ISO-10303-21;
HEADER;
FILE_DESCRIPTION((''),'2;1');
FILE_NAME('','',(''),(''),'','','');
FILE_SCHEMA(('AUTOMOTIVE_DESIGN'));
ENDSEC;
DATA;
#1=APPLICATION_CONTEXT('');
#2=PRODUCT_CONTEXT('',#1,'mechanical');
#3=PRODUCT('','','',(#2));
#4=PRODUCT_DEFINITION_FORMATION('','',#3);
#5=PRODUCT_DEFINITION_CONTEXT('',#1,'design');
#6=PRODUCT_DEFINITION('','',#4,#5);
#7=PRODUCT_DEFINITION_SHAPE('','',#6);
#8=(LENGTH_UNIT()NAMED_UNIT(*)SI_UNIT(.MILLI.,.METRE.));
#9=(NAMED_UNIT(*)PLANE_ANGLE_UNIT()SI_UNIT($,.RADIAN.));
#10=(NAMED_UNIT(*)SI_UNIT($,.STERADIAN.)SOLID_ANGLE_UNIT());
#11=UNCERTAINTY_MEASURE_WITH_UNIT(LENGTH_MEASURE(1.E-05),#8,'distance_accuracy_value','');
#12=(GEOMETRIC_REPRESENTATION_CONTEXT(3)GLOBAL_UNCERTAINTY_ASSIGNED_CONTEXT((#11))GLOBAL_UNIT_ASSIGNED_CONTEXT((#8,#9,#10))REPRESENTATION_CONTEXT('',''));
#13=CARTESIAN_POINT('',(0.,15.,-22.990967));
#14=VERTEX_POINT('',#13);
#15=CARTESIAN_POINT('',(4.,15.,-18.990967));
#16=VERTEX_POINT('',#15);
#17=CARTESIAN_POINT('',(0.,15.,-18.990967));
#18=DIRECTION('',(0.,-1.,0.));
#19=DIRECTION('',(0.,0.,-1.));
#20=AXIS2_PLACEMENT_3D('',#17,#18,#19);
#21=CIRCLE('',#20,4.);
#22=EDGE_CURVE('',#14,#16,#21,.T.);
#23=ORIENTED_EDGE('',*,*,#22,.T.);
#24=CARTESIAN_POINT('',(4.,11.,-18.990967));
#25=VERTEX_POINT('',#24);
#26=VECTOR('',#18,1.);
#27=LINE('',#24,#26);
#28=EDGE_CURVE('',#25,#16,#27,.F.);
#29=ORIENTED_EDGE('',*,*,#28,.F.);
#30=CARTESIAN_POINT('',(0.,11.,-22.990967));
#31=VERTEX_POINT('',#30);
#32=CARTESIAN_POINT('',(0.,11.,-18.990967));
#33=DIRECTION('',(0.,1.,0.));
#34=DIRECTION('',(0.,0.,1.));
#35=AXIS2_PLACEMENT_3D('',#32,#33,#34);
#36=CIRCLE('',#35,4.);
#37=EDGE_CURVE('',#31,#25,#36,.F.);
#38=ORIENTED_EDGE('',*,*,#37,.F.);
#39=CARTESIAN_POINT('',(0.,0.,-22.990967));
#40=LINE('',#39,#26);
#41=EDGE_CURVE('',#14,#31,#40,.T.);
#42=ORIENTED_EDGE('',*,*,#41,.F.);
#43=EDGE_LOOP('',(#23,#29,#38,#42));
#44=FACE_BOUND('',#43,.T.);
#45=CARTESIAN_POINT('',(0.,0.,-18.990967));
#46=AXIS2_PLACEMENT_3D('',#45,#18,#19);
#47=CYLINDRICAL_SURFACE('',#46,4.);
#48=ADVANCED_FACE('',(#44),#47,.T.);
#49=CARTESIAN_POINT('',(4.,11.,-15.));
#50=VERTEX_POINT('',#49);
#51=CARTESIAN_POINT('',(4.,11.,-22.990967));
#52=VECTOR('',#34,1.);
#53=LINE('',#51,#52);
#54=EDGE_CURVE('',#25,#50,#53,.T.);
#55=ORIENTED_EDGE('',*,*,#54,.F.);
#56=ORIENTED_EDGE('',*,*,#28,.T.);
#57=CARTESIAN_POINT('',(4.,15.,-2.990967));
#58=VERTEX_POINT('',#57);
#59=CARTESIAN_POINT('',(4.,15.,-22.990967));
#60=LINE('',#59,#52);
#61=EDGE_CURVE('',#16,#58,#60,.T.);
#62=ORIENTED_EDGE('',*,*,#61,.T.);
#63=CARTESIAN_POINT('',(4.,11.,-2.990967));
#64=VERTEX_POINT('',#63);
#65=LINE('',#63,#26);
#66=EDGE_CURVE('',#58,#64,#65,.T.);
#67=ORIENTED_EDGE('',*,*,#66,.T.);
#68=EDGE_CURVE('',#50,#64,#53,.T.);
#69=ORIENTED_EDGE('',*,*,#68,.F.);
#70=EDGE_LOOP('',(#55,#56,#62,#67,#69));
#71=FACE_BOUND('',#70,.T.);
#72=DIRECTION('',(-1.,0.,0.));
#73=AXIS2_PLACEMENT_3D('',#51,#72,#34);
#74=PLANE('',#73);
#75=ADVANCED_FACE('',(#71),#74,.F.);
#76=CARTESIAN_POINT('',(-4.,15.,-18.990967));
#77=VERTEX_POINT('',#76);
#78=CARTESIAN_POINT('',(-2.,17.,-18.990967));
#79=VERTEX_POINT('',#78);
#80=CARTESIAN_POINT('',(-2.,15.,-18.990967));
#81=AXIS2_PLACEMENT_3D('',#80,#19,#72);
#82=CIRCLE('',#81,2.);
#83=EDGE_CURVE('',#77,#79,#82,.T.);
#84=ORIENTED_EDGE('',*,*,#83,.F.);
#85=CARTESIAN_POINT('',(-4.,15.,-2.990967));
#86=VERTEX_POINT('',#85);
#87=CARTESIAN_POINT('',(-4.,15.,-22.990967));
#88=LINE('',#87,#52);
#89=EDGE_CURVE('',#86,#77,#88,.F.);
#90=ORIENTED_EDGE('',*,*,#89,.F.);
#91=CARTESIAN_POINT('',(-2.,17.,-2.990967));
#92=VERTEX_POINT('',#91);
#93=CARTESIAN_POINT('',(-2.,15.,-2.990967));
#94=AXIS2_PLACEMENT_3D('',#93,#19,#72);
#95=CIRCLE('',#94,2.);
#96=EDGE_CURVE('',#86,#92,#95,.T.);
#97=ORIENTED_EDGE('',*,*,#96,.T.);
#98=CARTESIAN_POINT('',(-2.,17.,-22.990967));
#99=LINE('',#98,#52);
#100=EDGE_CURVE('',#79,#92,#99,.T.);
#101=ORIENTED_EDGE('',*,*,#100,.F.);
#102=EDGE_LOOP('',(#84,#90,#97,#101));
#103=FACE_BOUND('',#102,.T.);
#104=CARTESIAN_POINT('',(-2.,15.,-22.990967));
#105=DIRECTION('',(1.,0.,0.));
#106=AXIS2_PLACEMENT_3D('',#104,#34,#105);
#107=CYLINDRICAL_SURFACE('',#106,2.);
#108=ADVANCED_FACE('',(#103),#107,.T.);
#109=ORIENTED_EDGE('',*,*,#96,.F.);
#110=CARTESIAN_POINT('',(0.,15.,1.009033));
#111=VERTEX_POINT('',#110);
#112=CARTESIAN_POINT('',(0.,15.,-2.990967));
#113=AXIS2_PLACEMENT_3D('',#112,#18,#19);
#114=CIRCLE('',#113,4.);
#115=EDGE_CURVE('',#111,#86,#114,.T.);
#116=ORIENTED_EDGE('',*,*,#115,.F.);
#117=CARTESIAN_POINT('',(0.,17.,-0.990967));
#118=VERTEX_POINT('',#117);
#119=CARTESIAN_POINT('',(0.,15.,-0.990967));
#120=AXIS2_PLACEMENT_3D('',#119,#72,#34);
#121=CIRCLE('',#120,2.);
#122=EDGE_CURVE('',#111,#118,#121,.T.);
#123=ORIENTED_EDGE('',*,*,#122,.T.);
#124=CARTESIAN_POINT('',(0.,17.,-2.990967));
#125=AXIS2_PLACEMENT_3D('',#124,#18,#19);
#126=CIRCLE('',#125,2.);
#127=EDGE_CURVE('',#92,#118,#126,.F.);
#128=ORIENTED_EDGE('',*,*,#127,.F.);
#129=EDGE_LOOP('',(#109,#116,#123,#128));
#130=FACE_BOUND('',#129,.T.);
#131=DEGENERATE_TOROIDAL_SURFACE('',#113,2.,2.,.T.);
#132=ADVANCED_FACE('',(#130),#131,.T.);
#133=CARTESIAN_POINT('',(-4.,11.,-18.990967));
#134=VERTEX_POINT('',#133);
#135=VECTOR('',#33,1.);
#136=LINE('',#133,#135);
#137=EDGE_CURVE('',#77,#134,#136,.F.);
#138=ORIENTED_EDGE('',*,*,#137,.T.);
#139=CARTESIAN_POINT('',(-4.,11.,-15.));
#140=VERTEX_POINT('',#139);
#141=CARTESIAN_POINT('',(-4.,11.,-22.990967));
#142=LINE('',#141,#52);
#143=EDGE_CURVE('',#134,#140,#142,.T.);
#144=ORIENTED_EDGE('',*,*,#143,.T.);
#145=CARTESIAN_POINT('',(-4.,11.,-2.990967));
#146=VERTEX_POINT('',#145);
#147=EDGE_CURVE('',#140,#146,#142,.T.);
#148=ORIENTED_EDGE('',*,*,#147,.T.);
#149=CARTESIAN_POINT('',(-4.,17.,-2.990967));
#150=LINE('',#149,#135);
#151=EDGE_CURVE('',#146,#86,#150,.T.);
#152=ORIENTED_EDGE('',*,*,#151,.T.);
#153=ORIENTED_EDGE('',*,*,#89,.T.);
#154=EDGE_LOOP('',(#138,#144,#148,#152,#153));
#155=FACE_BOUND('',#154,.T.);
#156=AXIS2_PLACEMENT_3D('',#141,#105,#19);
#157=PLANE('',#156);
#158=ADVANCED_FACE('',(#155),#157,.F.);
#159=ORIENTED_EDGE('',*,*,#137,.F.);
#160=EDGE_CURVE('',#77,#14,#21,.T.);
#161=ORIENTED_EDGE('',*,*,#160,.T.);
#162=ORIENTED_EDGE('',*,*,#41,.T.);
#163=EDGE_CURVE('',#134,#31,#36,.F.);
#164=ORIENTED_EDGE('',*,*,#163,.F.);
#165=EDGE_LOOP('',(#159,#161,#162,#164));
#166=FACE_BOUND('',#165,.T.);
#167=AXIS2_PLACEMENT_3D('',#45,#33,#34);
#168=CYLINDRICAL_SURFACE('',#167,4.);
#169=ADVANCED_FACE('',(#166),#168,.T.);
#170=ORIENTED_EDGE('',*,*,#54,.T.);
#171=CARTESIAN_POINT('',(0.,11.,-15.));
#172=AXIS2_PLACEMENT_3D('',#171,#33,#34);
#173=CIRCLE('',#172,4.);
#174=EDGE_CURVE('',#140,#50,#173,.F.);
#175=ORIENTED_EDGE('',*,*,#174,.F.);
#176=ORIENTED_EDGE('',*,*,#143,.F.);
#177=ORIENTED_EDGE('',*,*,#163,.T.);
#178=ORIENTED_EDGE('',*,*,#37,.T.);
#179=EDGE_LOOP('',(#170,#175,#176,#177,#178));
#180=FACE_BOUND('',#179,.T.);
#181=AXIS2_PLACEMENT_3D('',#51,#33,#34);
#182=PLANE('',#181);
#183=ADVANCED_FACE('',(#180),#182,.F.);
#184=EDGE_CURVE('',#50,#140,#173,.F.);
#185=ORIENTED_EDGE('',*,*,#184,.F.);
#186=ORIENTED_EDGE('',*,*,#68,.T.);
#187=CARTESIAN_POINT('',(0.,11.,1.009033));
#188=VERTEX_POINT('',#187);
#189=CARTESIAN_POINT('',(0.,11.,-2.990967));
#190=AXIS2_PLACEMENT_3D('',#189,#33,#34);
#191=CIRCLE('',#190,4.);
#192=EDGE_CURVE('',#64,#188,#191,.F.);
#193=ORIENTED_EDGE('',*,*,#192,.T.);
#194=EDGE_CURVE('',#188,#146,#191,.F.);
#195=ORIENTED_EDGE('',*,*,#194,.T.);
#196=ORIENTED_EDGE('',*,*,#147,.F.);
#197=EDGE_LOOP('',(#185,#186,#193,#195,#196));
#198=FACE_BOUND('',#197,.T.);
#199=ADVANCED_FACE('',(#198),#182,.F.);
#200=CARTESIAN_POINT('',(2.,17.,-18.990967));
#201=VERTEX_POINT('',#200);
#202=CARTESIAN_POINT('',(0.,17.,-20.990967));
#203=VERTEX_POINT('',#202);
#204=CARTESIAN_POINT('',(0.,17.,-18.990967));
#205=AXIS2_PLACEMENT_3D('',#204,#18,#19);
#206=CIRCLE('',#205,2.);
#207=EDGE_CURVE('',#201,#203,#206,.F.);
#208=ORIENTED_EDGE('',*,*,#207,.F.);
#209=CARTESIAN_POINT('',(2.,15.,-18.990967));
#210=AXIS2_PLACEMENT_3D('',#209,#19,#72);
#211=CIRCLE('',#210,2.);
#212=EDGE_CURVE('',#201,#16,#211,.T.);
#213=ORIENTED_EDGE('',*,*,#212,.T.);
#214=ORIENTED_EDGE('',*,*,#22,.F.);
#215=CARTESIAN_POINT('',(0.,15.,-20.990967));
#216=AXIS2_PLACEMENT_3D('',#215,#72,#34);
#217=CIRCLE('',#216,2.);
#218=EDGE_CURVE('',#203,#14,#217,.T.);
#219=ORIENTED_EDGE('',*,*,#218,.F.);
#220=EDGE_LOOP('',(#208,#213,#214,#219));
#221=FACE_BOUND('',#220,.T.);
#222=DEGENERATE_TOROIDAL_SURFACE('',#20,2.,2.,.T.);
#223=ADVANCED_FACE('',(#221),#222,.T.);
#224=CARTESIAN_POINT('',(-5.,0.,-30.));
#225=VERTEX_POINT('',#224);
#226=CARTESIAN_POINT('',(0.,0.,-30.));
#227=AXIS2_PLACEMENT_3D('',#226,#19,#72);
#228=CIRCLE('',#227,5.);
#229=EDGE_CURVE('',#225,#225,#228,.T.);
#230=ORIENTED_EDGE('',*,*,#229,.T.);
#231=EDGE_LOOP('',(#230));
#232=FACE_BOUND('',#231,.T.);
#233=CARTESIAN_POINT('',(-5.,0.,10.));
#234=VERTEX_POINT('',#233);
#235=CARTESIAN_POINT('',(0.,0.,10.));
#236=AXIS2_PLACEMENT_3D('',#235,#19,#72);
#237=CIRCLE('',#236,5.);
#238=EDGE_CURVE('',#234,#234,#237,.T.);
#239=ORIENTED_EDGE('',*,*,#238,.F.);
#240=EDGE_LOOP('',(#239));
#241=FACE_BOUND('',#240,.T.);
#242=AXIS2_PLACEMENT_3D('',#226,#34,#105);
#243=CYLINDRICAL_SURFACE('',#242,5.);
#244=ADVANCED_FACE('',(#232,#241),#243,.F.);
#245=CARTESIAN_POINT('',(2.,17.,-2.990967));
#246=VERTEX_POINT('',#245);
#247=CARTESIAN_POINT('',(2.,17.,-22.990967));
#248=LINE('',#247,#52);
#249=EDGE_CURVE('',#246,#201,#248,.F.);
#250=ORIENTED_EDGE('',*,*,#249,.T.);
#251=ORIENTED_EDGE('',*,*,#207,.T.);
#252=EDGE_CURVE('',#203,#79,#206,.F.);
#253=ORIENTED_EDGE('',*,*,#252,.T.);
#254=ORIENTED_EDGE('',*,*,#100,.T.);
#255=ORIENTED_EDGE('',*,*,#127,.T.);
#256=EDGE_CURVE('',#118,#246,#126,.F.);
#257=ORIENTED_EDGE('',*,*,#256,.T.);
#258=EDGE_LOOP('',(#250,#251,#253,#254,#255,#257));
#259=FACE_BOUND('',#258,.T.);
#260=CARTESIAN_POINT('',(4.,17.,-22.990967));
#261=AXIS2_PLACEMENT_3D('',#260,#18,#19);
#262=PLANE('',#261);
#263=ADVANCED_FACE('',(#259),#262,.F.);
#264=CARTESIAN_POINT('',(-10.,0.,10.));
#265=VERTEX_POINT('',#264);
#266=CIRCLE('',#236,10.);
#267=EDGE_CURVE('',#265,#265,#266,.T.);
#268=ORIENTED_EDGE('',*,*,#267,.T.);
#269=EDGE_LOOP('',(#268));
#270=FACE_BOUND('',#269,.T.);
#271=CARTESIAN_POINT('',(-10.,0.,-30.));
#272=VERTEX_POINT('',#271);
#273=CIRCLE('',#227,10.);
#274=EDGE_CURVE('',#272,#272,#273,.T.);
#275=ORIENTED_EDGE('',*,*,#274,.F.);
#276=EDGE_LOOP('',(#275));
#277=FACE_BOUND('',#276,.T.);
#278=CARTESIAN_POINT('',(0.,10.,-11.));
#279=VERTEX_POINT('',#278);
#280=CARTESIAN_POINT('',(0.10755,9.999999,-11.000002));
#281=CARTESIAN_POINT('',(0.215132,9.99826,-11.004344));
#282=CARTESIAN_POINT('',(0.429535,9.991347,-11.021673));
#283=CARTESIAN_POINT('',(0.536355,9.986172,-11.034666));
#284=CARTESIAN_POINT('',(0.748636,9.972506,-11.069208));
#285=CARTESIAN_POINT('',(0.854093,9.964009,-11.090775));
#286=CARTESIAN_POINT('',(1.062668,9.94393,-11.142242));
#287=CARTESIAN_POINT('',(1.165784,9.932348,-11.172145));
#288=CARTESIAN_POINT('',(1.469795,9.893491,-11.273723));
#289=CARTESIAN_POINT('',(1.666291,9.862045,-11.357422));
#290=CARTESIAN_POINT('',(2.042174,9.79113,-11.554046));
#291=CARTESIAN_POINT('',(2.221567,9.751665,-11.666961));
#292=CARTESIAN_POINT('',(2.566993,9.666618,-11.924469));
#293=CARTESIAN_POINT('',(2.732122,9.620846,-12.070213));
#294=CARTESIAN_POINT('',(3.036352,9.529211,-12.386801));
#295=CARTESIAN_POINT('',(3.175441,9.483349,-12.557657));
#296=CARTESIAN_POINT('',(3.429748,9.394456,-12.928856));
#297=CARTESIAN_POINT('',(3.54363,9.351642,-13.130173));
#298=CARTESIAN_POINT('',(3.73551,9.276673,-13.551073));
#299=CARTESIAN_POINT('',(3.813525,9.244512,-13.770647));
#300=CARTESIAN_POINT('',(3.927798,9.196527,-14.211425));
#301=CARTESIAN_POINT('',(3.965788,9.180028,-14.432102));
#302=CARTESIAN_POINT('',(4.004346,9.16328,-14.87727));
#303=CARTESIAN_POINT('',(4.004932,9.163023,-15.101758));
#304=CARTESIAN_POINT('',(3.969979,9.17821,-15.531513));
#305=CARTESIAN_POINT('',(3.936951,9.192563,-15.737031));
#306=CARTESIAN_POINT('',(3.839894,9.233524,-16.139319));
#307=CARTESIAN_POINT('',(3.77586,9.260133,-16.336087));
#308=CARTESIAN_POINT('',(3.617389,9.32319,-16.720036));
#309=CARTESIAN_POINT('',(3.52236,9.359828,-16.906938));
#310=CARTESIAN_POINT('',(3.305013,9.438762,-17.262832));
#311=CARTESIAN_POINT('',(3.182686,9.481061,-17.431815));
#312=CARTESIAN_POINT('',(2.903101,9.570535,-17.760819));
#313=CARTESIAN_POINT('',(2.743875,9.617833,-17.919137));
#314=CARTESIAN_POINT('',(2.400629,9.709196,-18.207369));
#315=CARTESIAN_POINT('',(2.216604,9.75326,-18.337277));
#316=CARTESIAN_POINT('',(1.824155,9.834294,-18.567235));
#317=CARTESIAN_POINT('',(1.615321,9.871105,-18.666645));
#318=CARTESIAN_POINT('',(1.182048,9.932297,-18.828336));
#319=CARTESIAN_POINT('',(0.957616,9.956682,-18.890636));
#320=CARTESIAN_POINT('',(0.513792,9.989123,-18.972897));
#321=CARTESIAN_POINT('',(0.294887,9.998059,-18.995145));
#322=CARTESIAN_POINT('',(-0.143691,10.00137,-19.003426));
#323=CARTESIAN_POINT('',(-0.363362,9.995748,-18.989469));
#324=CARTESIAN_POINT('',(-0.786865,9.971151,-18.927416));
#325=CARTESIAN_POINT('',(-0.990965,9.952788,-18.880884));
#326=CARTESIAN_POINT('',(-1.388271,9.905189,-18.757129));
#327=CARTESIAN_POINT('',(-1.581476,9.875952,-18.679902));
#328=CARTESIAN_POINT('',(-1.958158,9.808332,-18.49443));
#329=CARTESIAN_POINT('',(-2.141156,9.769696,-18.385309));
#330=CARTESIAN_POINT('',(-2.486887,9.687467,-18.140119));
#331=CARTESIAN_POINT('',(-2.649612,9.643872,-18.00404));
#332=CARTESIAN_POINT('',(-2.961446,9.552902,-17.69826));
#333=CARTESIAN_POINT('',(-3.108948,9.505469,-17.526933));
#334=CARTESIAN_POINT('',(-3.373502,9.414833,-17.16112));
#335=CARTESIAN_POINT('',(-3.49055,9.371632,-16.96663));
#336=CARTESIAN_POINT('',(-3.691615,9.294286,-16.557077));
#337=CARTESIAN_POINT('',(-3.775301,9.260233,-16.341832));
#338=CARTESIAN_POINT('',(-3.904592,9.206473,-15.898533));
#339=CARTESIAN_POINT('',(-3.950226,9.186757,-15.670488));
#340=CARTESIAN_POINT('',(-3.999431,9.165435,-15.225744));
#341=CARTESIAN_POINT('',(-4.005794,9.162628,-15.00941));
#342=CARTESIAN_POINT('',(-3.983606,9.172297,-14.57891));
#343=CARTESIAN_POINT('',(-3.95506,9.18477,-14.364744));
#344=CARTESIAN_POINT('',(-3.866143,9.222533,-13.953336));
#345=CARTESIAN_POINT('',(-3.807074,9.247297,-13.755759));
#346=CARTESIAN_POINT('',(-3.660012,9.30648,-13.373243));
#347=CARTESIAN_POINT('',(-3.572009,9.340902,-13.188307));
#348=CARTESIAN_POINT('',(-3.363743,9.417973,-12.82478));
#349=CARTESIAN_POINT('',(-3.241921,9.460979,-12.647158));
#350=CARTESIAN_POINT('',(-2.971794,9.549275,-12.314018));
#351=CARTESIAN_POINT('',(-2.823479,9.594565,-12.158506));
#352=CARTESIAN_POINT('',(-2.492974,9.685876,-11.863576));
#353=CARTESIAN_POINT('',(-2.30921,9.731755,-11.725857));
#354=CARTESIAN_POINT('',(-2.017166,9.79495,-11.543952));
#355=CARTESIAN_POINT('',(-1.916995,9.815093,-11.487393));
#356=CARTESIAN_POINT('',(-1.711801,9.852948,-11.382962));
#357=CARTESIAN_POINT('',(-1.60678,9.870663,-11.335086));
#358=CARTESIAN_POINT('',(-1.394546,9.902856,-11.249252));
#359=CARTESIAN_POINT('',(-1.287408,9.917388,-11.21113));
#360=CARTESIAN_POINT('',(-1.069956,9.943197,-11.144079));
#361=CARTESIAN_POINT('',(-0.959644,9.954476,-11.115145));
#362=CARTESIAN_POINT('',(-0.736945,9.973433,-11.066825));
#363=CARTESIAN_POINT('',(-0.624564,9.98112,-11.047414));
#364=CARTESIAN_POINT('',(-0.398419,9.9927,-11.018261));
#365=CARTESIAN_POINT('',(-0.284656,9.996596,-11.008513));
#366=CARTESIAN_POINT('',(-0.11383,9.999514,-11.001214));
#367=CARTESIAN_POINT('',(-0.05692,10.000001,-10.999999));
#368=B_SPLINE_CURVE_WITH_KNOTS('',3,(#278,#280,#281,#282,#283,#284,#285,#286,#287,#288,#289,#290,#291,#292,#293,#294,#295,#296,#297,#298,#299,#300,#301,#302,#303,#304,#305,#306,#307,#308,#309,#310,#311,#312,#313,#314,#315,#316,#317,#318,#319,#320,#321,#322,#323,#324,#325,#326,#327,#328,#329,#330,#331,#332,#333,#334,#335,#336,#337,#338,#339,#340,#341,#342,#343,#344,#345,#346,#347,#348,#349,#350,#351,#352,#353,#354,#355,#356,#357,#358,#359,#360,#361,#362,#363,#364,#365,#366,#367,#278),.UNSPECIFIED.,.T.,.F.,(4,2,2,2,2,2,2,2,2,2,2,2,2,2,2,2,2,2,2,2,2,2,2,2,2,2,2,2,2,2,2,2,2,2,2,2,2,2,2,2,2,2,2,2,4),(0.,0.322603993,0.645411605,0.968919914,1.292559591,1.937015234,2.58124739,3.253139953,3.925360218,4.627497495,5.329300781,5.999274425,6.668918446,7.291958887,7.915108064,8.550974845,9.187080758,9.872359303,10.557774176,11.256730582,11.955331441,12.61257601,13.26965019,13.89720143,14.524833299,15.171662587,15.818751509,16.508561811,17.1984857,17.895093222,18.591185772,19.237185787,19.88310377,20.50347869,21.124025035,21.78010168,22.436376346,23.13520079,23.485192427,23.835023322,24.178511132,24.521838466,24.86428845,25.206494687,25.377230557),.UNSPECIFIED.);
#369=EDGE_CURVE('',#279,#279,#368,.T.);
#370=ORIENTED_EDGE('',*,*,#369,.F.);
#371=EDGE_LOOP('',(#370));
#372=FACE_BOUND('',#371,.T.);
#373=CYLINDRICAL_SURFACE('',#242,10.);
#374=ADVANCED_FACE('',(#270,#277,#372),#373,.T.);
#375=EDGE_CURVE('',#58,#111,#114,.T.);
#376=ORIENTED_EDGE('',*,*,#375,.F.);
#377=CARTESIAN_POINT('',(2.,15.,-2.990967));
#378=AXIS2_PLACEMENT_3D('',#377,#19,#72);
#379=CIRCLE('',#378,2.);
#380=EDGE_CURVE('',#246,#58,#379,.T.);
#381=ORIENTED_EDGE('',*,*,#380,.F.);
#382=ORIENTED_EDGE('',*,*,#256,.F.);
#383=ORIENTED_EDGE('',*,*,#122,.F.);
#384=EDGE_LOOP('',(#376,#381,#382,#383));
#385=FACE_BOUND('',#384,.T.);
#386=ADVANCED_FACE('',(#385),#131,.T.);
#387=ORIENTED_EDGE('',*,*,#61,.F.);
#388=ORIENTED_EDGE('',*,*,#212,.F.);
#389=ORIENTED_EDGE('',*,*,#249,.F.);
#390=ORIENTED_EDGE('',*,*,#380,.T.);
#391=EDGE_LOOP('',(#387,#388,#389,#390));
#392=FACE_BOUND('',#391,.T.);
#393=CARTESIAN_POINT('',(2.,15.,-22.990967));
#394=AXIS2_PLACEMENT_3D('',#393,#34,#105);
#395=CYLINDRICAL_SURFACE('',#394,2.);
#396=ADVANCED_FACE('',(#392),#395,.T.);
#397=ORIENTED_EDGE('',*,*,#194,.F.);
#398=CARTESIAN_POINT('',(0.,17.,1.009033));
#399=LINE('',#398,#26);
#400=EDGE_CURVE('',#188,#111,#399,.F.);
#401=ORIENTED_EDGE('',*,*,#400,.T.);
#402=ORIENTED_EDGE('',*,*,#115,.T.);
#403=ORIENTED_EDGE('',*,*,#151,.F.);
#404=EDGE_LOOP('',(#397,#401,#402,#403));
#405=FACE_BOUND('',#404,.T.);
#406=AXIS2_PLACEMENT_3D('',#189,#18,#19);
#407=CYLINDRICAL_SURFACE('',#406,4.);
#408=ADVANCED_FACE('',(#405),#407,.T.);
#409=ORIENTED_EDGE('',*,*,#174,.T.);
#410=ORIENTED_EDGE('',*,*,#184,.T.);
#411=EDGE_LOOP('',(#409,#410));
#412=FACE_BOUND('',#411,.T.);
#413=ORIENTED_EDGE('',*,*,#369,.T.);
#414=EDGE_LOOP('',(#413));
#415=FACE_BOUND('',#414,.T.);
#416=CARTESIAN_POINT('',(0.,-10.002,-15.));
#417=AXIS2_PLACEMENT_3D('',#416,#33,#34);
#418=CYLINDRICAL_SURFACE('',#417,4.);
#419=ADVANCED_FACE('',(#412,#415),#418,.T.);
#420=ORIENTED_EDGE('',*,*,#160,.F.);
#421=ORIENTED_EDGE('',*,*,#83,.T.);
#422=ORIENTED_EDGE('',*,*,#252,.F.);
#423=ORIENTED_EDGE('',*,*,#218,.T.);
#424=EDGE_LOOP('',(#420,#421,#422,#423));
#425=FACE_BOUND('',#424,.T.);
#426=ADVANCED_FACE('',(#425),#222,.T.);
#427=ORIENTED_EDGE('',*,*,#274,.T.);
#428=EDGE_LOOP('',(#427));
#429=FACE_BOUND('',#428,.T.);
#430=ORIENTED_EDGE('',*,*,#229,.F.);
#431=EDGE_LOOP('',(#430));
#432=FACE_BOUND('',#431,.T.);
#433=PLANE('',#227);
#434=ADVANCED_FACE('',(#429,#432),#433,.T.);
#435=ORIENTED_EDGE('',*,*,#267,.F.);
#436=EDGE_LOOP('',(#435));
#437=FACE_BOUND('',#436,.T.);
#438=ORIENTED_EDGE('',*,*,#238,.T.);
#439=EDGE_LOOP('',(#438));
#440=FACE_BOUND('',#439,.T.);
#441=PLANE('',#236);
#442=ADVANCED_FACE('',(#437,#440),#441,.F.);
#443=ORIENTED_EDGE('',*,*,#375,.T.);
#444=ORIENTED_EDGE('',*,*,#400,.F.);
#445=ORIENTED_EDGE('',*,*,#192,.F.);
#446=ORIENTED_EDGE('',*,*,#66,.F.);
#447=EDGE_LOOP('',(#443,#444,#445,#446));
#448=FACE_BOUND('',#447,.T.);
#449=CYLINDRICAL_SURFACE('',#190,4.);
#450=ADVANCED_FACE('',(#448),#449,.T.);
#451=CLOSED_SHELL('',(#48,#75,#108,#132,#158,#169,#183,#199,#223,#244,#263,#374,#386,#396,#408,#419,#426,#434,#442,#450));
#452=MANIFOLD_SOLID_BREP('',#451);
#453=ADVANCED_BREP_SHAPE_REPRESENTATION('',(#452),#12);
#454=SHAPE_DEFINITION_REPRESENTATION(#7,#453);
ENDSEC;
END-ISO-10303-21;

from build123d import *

# Parameters (mm, degrees)
EXTRUDE_THIN6_START      = -10
SKETCH10_R               = 10
SKETCH10_R_2             = 5
EXTRUDE_THIN6_DEPTH      = 40
BOSS_EXTRUDE3_REACH      = 42.311
BOSS_EXTRUDE3_END_RADIUS = 10
SKETCH11_R               = 4
SKETCH12_W               = 4.268669827
SKETCH12_H               = 50.716029666
CUT_EXTRUDE2_DEPTH       = 4
BOSS_EXTRUDE4_START      = -20
SKETCH13_W               = 8
SKETCH13_H               = 6
BOSS_EXTRUDE4_DEPTH      = 24
FILLET3_R                = 4
FILLET4_R                = 2


with BuildPart() as part:
    # Sketch10 → Extrude-Thin6 (new body)
    with BuildSketch(Plane(origin=(0, 0, 0), x_dir=(-1, 0, 0), z_dir=(0, 0, -1)).offset(EXTRUDE_THIN6_START)):
        Circle(SKETCH10_R)
        Circle(SKETCH10_R_2, mode=Mode.SUBTRACT)
    extrude(amount=EXTRUDE_THIN6_DEPTH)

    # Boss-Extrude3: up to this cylinder (the profile starts outside it)
    boss_extrude3_end = Plane(origin=(0, 0, -15), z_dir=(0, 0, 1)) * Cylinder(BOSS_EXTRUDE3_END_RADIUS, 105.622, mode=Mode.PRIVATE)
    # Sketch11 → Boss-Extrude3 (add, up to the surface)
    with BuildSketch(Plane(origin=(0, 15, 0), x_dir=(1, 0, 0), z_dir=(0, 1, 0)), mode=Mode.PRIVATE) as boss_extrude3_sk1:
        with Locations(Location((0, 15, 0), (0, 0, 270))):
            Circle(SKETCH11_R)
    boss_extrude3_tool1 = extrude(boss_extrude3_sk1.sketch, amount=-BOSS_EXTRUDE3_REACH, mode=Mode.PRIVATE) - boss_extrude3_end
    add(boss_extrude3_tool1.solids().sort_by_distance((0, 15, -15))[0])

    # Sketch12 → Cut-Extrude2 (cut)
    with BuildSketch(Plane(origin=(0, 15, 0), x_dir=(1, 0, 0), z_dir=(0, 1, 0))):
        with Locations((-1.865665086, 44.348981699)):
            Rectangle(SKETCH12_W, SKETCH12_H)
    extrude(amount=-CUT_EXTRUDE2_DEPTH, mode=Mode.SUBTRACT)

    # Sketch13 → Boss-Extrude4 (add)
    with BuildSketch(Plane(origin=(0, 0, -18.990966866), x_dir=(-1, 0, 0), z_dir=(0, 0, -1)).offset(BOSS_EXTRUDE4_START)):
        with Locations((0, 14)):
            Rectangle(SKETCH13_W, SKETCH13_H)
    extrude(amount=BOSS_EXTRUDE4_DEPTH)

    # Fillet3
    fillet3_edges = [part.edges().sort_by_distance(p)[0] for p in [
        (4, 14, -22.990966866),
        (-4, 14, 1.009033134),
        (4, 14, 1.009033134),
        (-4, 14, -22.990966866),
    ]]
    fillet(fillet3_edges, radius=FILLET3_R - 0.0001)  # a hair under: the kernel refuses the full size

    # Fillet4
    fillet4_edges = [part.edges().sort_by_distance(p)[0] for p in [
        (-4, 17, -10.990966866),
        (4, 17, -10.990966866),
        (2.828456414, 17, -21.81942328),
        (-2.828456414, 17, -21.81942328),
        (2.828456414, 17, -0.162510452),
        (-2.828456414, 17, -0.162510452),
    ]]
    fillet(fillet4_edges, radius=FILLET4_R - 0.0001)  # a hair under: the kernel refuses the full size


solid = part.part
